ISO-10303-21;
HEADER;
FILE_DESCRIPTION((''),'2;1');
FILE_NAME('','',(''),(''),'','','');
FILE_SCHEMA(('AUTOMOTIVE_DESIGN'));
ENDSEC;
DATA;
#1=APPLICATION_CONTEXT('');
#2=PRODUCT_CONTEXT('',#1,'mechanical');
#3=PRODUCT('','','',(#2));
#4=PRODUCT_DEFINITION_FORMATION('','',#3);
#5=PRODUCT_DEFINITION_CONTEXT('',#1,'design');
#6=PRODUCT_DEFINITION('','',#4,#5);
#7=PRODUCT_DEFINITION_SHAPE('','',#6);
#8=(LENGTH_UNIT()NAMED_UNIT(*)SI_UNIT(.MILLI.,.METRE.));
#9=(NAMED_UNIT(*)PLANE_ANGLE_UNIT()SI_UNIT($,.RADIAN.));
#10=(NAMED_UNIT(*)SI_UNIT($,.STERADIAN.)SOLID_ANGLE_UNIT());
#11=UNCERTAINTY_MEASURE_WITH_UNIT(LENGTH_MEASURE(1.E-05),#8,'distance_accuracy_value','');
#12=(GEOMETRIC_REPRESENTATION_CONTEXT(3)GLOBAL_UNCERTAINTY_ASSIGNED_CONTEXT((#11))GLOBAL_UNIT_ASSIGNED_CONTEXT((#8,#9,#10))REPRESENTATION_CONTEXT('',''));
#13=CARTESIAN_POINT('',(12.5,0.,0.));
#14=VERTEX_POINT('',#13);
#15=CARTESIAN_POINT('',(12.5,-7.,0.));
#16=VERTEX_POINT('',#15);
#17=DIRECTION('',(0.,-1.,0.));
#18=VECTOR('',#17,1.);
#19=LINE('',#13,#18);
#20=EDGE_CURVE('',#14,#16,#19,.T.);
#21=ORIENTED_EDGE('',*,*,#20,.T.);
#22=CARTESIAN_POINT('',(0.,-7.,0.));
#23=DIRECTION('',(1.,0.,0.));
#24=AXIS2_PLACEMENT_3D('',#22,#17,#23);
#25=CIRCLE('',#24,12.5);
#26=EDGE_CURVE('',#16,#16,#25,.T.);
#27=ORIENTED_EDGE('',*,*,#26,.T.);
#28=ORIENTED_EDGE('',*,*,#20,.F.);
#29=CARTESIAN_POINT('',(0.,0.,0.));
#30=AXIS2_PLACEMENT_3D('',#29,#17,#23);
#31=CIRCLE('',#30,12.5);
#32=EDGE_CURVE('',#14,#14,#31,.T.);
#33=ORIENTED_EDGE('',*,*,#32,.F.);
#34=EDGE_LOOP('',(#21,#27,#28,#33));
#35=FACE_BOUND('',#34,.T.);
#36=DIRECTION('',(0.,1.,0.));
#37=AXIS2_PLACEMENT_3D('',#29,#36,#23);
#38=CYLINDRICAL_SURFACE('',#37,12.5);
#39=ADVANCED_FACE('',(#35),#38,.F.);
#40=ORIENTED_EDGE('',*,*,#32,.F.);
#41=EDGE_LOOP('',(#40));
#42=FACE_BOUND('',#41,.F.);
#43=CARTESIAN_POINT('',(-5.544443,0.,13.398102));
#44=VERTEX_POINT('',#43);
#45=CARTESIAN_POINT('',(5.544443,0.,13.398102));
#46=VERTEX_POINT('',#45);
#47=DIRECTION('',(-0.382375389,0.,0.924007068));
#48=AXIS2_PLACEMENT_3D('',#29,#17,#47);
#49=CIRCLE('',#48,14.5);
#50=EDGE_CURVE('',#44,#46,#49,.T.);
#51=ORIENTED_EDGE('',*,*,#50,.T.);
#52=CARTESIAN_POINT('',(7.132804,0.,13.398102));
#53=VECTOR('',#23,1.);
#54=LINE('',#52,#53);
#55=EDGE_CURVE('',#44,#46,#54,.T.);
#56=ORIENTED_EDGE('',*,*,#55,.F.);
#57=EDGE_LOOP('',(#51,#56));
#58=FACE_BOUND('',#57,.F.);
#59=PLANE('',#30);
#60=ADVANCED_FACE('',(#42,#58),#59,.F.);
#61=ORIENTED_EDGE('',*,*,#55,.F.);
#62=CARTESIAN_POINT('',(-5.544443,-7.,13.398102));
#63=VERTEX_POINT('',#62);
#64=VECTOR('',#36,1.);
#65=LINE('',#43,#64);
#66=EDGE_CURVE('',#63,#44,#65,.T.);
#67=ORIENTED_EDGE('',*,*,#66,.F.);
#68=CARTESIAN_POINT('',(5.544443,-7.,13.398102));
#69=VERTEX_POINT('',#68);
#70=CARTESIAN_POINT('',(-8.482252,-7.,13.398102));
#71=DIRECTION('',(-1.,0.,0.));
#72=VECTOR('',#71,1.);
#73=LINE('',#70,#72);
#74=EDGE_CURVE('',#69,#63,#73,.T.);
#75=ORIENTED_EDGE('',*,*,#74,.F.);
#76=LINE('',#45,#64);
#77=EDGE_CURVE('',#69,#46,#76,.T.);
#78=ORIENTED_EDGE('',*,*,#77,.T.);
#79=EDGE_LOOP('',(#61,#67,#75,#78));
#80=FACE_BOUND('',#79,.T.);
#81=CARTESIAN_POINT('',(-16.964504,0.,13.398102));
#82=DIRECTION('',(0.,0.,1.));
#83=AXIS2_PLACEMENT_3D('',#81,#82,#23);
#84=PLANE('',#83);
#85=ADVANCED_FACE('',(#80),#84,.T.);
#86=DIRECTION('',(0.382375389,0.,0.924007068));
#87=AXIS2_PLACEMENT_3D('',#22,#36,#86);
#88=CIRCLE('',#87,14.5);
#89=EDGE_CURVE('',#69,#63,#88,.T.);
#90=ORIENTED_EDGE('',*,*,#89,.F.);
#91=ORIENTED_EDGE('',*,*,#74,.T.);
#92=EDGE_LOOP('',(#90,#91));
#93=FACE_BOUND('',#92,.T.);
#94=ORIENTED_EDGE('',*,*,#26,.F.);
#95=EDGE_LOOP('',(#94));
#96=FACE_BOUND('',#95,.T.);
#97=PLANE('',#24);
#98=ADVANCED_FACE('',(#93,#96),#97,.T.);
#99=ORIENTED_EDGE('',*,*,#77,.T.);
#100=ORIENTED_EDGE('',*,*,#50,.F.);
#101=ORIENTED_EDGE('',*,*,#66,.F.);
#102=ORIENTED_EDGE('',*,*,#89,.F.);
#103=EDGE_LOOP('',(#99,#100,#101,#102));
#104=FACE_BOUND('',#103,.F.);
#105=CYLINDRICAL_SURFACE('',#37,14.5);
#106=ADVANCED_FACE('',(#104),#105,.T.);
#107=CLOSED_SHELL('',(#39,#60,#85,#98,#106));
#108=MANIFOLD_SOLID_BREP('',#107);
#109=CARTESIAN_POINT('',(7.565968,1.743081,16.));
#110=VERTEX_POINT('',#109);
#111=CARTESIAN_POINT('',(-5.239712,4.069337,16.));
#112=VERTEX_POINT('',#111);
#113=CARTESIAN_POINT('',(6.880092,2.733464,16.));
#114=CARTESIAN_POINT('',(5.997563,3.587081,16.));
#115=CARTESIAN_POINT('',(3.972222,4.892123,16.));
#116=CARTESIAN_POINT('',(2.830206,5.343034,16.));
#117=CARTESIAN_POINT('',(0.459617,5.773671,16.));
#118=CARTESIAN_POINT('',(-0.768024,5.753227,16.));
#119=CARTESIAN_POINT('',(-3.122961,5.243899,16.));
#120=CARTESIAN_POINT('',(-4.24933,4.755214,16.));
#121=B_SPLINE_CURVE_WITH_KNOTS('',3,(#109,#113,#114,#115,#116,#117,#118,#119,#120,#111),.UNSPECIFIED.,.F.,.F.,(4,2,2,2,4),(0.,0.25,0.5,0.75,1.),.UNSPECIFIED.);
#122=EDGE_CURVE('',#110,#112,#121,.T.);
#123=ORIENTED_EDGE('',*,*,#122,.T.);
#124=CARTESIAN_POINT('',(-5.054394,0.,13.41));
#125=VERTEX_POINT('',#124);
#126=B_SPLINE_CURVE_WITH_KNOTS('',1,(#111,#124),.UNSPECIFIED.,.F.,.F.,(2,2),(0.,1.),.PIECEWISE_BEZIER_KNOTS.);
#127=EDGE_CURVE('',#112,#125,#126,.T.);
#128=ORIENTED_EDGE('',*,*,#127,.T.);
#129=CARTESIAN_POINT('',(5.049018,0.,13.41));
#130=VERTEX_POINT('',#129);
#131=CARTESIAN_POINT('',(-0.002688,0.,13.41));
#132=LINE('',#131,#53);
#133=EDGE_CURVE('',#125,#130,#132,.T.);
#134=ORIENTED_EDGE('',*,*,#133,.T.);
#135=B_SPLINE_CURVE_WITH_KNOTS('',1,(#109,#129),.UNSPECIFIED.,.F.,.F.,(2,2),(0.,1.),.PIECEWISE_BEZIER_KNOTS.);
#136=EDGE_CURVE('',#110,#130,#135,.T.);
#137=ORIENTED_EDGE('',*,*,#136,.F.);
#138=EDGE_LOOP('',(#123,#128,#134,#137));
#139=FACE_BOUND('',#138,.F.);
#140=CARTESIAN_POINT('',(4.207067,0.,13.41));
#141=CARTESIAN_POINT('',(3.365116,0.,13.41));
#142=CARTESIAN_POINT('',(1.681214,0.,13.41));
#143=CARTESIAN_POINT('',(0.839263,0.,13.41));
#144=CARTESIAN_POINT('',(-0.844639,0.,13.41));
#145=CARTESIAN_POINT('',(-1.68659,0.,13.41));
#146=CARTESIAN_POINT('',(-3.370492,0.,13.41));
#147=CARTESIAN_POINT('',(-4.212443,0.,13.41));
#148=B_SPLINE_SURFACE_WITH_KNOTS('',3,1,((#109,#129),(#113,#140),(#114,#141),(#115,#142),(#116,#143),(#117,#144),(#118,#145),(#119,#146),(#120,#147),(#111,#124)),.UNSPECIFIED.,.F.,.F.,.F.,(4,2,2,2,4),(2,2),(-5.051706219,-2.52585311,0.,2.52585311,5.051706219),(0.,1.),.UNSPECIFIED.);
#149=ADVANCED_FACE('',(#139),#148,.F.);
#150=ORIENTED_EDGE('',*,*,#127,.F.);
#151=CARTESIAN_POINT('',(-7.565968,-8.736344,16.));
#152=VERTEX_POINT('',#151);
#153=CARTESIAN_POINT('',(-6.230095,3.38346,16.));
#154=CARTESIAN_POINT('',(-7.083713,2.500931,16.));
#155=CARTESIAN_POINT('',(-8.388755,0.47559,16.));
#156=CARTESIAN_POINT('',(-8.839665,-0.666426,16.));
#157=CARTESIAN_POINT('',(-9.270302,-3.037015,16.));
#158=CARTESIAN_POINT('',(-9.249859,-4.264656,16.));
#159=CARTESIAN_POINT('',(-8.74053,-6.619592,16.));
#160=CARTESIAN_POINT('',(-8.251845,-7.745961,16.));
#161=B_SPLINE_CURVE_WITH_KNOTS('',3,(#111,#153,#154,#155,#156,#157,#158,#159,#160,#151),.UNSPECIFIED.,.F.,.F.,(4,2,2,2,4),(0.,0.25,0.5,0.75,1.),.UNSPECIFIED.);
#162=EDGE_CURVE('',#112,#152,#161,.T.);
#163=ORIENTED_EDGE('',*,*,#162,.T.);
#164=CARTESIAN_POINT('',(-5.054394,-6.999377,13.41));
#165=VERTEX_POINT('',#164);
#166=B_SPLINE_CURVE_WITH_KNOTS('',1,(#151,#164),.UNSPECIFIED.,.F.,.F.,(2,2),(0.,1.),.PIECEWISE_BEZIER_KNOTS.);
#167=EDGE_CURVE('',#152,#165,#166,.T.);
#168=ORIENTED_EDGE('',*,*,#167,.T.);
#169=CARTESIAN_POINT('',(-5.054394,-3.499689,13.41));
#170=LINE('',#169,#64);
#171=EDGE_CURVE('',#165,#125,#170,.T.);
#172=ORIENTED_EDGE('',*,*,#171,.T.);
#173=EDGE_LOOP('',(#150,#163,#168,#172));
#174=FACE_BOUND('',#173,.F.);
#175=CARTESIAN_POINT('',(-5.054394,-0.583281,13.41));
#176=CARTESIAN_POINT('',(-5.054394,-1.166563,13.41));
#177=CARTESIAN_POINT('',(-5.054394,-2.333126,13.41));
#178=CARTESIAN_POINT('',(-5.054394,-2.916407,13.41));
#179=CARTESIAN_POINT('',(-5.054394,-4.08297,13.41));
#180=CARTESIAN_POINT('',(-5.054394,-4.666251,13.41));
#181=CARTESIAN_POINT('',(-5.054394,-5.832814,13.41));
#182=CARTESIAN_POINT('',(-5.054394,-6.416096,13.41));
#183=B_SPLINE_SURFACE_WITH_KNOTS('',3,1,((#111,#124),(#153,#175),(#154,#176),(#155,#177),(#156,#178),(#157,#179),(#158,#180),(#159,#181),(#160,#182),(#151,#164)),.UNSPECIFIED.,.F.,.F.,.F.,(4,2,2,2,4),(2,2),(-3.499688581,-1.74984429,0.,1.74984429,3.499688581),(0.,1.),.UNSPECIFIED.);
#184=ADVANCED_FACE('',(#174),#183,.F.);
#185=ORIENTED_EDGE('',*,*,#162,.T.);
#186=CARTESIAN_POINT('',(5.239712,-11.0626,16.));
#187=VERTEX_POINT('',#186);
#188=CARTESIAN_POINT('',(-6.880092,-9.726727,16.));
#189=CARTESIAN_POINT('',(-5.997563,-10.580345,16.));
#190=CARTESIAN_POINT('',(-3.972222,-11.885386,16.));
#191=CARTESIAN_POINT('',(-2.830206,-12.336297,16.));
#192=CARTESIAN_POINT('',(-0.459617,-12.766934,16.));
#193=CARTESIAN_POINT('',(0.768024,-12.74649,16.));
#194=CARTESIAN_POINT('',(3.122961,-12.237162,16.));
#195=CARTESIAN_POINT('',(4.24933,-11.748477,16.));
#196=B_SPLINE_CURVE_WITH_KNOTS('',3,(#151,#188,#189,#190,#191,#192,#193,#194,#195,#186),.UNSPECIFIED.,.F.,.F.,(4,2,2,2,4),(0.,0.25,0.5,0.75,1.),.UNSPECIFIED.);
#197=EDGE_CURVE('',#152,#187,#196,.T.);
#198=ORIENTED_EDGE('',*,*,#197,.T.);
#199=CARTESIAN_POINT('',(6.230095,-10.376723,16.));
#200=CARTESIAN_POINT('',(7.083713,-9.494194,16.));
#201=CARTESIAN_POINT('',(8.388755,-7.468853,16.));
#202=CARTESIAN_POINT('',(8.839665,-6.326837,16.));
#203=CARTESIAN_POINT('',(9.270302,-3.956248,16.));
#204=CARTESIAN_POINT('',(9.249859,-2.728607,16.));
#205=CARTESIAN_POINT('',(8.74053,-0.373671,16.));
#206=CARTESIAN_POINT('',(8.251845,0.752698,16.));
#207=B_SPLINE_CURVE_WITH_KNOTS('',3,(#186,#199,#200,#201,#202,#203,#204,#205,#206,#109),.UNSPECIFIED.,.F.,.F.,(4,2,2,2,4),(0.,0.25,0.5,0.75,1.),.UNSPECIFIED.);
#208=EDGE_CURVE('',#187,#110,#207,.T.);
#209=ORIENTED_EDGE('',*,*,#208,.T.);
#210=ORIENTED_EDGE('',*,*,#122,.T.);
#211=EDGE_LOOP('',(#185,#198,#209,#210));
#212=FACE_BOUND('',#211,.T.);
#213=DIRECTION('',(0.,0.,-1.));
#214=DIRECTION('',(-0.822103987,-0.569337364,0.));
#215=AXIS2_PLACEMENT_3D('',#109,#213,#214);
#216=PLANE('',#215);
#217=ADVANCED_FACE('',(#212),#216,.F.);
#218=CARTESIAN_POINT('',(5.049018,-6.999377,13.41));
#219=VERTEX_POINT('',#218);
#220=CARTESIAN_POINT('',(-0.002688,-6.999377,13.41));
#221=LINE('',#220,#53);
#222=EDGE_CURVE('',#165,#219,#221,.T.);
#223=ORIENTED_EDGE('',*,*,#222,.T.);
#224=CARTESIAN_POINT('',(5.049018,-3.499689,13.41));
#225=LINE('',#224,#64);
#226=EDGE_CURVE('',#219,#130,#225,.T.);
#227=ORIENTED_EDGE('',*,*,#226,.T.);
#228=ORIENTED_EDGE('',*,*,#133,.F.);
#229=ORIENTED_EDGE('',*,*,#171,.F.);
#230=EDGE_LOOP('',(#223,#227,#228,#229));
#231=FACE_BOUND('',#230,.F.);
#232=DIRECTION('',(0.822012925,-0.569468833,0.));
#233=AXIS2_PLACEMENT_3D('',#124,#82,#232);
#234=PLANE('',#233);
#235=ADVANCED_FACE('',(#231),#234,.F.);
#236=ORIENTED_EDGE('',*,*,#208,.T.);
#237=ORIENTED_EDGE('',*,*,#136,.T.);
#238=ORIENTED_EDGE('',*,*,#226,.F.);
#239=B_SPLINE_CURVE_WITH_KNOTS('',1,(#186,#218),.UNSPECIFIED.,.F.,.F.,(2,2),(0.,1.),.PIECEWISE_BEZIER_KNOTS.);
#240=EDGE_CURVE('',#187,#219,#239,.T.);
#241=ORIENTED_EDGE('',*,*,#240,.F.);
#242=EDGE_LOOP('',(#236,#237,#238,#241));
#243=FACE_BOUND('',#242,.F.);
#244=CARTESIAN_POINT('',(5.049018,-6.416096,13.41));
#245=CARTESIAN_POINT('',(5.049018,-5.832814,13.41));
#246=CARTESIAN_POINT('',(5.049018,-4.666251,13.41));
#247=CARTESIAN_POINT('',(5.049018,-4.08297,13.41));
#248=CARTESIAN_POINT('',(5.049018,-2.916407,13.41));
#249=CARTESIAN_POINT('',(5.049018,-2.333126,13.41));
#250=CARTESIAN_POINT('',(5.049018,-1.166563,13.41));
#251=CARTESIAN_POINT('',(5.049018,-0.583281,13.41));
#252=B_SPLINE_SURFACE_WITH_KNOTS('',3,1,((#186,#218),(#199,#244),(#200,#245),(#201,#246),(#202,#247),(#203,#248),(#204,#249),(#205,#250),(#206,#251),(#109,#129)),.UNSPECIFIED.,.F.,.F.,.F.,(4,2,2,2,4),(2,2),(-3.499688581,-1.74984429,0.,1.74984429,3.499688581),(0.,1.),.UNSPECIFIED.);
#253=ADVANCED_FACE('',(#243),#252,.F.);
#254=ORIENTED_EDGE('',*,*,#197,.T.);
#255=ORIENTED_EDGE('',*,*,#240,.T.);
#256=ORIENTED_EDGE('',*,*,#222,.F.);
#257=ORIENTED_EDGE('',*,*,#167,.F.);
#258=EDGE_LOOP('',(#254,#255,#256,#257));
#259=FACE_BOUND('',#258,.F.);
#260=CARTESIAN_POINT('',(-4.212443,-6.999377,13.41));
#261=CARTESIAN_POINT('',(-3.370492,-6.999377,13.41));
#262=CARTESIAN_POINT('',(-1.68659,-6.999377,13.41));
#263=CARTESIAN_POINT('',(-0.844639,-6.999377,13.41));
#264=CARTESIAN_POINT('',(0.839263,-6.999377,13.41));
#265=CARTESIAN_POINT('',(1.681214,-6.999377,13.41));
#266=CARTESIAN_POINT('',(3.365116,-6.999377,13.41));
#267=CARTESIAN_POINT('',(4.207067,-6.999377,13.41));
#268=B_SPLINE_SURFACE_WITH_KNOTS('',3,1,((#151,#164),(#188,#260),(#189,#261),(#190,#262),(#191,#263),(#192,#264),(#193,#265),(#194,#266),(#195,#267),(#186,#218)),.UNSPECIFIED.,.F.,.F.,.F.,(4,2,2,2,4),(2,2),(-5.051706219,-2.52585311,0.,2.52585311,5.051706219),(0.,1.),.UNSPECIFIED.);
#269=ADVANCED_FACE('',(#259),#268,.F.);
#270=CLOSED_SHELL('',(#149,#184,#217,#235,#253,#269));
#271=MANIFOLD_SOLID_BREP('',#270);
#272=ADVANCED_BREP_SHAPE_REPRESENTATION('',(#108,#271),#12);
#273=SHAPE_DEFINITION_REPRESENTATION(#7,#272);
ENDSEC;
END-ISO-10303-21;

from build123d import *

# Parameters (mm, degrees)
F0_R     = 14.5
F0_R_2   = 12.5
F1_DEPTH = 7
F2_W     = 48.194617033
F2_H     = 4.0483484045
F3_DEPTH = 27.99757
F5_W     = 10.1034124382
F5_H     = 6.9993771613


# Not quite as in the source:
# - the arcs of a loft's sections are written as splines that run evenly, so that the points pair up as in the source's solid


with BuildPart() as f1:
    # F0 (on Front) → F1 (new body)
    with BuildSketch(Plane.XZ):
        Circle(F0_R)
        Circle(F0_R_2, mode=Mode.SUBTRACT)
    extrude(amount=F1_DEPTH)

    # F2 (on Front) → F3 (cut)
    with BuildSketch(Plane.XZ):
        with Locations((7.1328040212, 15.4222766869)):
            Rectangle(F2_W, F2_H)
    extrude(amount=F3_DEPTH, mode=Mode.SUBTRACT)


with BuildPart() as f8:
    # F7 (on offset) → F8 section 0
    with BuildSketch(Plane.XY.offset(16)):
        with BuildLine():
            add(Edge.make_bspline(
                [(7.565968402, 1.7430809523), (6.880091644, 2.7334639001), (5.9975628433, 3.5870814841), (3.9722215545, 4.89212321), (2.8302059518, 5.3430338738), (0.4596167417, 5.7736706573), (-0.76802414, 5.7532273399), (-3.1229605537, 5.2438986345), (-4.2493295187, 4.7552136457), (-5.2397124665, 4.0693368877)],
                knots=[0, 0, 0, 0, 0.25, 0.25, 0.5, 0.5, 0.75, 0.75, 1, 1, 1, 1], degree=3))
            add(Edge.make_bspline(
                [(-5.2397124665, 4.0693368877), (-6.2300954144, 3.3834601297), (-7.0837129984, 2.500931329), (-8.3887547243, 0.4755900402), (-8.8396653881, -0.6664255625), (-9.2703021716, -3.0370147726), (-9.2498588542, -4.2646556543), (-8.7405301488, -6.619592068), (-8.25184516, -7.745961033), (-7.565968402, -8.7363439808)],
                knots=[0, 0, 0, 0, 0.25, 0.25, 0.5, 0.5, 0.75, 0.75, 1, 1, 1, 1], degree=3))
            add(Edge.make_bspline(
                [(-7.565968402, -8.7363439808), (-6.880091644, -9.7267269287), (-5.9975628433, -10.5803445126), (-3.9722215545, -11.8853862386), (-2.8302059518, -12.3362969023), (-0.4596167417, -12.7669336859), (0.76802414, -12.7464903685), (3.1229605537, -12.2371616631), (4.2493295187, -11.7484766742), (5.2397124665, -11.0625999162)],
                knots=[0, 0, 0, 0, 0.25, 0.25, 0.5, 0.5, 0.75, 0.75, 1, 1, 1, 1], degree=3))
            add(Edge.make_bspline(
                [(5.2397124665, -11.0625999162), (6.2300954144, -10.3767231583), (7.0837129984, -9.4941943576), (8.3887547243, -7.4688530688), (8.8396653881, -6.326837466), (9.2703021716, -3.9562482559), (9.2498588542, -2.7286073742), (8.7405301488, -0.3736709606), (8.25184516, 0.7526980044), (7.565968402, 1.7430809523)],
                knots=[0, 0, 0, 0, 0.25, 0.25, 0.5, 0.5, 0.75, 0.75, 1, 1, 1, 1], degree=3))
        make_face()
    # F5 (on offset) → F8 section 1
    with BuildSketch(Plane.XY.offset(13.41)):
        with Locations((-0.0026880298, -3.4996885806)):
            Rectangle(F5_W, F5_H)
    loft(ruled=True)


solid = Compound([f1.part, f8.part])
